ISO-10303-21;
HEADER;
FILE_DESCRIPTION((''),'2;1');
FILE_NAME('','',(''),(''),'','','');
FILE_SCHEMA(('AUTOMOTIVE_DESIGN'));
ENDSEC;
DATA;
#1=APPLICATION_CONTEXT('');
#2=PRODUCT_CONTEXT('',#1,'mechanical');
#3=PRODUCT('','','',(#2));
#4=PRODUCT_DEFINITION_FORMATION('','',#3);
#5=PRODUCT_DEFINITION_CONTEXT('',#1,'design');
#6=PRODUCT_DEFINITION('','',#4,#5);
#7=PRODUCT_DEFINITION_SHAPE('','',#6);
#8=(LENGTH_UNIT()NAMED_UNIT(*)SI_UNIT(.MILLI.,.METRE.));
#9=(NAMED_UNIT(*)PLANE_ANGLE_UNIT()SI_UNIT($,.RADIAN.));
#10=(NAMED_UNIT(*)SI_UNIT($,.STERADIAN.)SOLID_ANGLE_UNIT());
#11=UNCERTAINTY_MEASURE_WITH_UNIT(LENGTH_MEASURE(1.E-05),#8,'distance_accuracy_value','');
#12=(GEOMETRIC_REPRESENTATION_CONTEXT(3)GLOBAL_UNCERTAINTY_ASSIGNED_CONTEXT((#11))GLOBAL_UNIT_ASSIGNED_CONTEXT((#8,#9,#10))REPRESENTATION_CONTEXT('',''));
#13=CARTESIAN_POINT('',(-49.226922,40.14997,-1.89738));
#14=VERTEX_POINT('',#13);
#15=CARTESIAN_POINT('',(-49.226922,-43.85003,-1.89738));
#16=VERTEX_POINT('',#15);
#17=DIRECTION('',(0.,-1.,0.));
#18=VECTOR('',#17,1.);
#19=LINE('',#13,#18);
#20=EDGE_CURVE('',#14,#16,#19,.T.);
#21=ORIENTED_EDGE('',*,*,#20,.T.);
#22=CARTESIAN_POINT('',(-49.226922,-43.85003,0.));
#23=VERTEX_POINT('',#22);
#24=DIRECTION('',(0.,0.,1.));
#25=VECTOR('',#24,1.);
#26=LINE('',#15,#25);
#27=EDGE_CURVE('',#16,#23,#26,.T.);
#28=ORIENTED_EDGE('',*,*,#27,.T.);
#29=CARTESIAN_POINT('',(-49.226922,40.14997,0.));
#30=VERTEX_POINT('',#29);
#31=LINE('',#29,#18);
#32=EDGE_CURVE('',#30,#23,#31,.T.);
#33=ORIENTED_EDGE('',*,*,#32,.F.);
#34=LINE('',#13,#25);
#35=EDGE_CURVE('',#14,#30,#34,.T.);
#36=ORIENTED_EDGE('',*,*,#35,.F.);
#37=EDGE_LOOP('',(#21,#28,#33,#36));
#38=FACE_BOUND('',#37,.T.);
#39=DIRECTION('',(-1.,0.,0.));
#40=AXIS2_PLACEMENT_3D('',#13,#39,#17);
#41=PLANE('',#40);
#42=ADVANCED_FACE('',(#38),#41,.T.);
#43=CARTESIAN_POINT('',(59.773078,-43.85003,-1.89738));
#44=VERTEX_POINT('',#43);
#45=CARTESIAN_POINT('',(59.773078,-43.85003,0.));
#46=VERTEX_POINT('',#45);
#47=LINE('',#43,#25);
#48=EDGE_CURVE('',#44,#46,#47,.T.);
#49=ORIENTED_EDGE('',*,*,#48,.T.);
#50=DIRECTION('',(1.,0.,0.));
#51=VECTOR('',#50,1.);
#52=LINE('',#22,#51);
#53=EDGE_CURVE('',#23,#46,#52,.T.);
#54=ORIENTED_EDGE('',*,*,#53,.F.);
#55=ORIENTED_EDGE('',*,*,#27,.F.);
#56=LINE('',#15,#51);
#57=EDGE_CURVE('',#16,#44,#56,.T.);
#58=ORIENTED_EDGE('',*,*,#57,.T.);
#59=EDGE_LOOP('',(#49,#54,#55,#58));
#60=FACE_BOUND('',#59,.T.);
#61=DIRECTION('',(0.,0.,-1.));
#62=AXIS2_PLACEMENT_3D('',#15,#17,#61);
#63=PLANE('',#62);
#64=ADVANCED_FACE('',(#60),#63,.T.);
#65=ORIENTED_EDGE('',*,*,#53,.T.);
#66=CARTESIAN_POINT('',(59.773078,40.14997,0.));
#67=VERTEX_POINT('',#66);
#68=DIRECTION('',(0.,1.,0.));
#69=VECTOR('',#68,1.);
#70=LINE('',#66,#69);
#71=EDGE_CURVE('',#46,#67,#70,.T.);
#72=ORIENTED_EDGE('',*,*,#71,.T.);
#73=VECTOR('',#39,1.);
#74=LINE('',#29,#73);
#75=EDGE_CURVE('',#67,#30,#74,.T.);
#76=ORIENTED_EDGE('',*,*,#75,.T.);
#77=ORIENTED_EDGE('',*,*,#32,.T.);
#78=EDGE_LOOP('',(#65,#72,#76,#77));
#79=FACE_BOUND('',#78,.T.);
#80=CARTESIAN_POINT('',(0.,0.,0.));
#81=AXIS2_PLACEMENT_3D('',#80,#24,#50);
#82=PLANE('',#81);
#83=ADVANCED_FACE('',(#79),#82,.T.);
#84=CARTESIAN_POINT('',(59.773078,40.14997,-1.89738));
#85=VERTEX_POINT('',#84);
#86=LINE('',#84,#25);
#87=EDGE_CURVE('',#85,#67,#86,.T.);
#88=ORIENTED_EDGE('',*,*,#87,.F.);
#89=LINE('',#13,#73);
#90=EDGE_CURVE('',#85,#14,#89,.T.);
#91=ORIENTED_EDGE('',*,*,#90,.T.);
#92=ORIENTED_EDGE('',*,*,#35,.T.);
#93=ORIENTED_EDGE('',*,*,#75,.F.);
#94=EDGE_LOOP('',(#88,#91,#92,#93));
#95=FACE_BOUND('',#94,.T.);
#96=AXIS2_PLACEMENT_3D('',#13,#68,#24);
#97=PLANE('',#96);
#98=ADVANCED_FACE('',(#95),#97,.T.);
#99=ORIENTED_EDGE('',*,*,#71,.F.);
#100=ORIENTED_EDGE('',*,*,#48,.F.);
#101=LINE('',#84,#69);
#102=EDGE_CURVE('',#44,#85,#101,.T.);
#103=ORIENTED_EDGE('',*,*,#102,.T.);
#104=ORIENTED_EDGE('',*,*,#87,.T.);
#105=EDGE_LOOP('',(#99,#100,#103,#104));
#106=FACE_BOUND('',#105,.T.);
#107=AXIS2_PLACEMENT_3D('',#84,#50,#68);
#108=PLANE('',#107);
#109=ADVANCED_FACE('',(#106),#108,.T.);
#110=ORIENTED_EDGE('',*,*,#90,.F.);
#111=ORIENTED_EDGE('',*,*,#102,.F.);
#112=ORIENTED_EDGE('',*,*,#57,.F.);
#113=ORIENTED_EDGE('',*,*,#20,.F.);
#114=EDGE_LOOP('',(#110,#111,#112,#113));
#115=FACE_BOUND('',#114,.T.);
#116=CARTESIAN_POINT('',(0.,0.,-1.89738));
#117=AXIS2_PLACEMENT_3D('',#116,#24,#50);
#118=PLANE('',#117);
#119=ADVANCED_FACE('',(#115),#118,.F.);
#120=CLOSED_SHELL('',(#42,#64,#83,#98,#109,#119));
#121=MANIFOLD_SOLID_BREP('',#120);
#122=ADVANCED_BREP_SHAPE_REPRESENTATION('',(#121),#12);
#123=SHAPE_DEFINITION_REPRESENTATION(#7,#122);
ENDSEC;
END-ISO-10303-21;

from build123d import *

# Parameters (mm, degrees)
SKETCH1_W          = 109
SKETCH1_H          = 84
BASE_FLANGE1_DEPTH = 1.89738


# Sheet-metal steps are written as plain solids
with BuildPart() as part:
    # Sketch1 → Base-Flange1 (new body)
    with BuildSketch(Plane.XY):
        with Locations((5.273078002, -1.850029648)):
            Rectangle(SKETCH1_W, SKETCH1_H)
    extrude(amount=-BASE_FLANGE1_DEPTH)


solid = part.part
